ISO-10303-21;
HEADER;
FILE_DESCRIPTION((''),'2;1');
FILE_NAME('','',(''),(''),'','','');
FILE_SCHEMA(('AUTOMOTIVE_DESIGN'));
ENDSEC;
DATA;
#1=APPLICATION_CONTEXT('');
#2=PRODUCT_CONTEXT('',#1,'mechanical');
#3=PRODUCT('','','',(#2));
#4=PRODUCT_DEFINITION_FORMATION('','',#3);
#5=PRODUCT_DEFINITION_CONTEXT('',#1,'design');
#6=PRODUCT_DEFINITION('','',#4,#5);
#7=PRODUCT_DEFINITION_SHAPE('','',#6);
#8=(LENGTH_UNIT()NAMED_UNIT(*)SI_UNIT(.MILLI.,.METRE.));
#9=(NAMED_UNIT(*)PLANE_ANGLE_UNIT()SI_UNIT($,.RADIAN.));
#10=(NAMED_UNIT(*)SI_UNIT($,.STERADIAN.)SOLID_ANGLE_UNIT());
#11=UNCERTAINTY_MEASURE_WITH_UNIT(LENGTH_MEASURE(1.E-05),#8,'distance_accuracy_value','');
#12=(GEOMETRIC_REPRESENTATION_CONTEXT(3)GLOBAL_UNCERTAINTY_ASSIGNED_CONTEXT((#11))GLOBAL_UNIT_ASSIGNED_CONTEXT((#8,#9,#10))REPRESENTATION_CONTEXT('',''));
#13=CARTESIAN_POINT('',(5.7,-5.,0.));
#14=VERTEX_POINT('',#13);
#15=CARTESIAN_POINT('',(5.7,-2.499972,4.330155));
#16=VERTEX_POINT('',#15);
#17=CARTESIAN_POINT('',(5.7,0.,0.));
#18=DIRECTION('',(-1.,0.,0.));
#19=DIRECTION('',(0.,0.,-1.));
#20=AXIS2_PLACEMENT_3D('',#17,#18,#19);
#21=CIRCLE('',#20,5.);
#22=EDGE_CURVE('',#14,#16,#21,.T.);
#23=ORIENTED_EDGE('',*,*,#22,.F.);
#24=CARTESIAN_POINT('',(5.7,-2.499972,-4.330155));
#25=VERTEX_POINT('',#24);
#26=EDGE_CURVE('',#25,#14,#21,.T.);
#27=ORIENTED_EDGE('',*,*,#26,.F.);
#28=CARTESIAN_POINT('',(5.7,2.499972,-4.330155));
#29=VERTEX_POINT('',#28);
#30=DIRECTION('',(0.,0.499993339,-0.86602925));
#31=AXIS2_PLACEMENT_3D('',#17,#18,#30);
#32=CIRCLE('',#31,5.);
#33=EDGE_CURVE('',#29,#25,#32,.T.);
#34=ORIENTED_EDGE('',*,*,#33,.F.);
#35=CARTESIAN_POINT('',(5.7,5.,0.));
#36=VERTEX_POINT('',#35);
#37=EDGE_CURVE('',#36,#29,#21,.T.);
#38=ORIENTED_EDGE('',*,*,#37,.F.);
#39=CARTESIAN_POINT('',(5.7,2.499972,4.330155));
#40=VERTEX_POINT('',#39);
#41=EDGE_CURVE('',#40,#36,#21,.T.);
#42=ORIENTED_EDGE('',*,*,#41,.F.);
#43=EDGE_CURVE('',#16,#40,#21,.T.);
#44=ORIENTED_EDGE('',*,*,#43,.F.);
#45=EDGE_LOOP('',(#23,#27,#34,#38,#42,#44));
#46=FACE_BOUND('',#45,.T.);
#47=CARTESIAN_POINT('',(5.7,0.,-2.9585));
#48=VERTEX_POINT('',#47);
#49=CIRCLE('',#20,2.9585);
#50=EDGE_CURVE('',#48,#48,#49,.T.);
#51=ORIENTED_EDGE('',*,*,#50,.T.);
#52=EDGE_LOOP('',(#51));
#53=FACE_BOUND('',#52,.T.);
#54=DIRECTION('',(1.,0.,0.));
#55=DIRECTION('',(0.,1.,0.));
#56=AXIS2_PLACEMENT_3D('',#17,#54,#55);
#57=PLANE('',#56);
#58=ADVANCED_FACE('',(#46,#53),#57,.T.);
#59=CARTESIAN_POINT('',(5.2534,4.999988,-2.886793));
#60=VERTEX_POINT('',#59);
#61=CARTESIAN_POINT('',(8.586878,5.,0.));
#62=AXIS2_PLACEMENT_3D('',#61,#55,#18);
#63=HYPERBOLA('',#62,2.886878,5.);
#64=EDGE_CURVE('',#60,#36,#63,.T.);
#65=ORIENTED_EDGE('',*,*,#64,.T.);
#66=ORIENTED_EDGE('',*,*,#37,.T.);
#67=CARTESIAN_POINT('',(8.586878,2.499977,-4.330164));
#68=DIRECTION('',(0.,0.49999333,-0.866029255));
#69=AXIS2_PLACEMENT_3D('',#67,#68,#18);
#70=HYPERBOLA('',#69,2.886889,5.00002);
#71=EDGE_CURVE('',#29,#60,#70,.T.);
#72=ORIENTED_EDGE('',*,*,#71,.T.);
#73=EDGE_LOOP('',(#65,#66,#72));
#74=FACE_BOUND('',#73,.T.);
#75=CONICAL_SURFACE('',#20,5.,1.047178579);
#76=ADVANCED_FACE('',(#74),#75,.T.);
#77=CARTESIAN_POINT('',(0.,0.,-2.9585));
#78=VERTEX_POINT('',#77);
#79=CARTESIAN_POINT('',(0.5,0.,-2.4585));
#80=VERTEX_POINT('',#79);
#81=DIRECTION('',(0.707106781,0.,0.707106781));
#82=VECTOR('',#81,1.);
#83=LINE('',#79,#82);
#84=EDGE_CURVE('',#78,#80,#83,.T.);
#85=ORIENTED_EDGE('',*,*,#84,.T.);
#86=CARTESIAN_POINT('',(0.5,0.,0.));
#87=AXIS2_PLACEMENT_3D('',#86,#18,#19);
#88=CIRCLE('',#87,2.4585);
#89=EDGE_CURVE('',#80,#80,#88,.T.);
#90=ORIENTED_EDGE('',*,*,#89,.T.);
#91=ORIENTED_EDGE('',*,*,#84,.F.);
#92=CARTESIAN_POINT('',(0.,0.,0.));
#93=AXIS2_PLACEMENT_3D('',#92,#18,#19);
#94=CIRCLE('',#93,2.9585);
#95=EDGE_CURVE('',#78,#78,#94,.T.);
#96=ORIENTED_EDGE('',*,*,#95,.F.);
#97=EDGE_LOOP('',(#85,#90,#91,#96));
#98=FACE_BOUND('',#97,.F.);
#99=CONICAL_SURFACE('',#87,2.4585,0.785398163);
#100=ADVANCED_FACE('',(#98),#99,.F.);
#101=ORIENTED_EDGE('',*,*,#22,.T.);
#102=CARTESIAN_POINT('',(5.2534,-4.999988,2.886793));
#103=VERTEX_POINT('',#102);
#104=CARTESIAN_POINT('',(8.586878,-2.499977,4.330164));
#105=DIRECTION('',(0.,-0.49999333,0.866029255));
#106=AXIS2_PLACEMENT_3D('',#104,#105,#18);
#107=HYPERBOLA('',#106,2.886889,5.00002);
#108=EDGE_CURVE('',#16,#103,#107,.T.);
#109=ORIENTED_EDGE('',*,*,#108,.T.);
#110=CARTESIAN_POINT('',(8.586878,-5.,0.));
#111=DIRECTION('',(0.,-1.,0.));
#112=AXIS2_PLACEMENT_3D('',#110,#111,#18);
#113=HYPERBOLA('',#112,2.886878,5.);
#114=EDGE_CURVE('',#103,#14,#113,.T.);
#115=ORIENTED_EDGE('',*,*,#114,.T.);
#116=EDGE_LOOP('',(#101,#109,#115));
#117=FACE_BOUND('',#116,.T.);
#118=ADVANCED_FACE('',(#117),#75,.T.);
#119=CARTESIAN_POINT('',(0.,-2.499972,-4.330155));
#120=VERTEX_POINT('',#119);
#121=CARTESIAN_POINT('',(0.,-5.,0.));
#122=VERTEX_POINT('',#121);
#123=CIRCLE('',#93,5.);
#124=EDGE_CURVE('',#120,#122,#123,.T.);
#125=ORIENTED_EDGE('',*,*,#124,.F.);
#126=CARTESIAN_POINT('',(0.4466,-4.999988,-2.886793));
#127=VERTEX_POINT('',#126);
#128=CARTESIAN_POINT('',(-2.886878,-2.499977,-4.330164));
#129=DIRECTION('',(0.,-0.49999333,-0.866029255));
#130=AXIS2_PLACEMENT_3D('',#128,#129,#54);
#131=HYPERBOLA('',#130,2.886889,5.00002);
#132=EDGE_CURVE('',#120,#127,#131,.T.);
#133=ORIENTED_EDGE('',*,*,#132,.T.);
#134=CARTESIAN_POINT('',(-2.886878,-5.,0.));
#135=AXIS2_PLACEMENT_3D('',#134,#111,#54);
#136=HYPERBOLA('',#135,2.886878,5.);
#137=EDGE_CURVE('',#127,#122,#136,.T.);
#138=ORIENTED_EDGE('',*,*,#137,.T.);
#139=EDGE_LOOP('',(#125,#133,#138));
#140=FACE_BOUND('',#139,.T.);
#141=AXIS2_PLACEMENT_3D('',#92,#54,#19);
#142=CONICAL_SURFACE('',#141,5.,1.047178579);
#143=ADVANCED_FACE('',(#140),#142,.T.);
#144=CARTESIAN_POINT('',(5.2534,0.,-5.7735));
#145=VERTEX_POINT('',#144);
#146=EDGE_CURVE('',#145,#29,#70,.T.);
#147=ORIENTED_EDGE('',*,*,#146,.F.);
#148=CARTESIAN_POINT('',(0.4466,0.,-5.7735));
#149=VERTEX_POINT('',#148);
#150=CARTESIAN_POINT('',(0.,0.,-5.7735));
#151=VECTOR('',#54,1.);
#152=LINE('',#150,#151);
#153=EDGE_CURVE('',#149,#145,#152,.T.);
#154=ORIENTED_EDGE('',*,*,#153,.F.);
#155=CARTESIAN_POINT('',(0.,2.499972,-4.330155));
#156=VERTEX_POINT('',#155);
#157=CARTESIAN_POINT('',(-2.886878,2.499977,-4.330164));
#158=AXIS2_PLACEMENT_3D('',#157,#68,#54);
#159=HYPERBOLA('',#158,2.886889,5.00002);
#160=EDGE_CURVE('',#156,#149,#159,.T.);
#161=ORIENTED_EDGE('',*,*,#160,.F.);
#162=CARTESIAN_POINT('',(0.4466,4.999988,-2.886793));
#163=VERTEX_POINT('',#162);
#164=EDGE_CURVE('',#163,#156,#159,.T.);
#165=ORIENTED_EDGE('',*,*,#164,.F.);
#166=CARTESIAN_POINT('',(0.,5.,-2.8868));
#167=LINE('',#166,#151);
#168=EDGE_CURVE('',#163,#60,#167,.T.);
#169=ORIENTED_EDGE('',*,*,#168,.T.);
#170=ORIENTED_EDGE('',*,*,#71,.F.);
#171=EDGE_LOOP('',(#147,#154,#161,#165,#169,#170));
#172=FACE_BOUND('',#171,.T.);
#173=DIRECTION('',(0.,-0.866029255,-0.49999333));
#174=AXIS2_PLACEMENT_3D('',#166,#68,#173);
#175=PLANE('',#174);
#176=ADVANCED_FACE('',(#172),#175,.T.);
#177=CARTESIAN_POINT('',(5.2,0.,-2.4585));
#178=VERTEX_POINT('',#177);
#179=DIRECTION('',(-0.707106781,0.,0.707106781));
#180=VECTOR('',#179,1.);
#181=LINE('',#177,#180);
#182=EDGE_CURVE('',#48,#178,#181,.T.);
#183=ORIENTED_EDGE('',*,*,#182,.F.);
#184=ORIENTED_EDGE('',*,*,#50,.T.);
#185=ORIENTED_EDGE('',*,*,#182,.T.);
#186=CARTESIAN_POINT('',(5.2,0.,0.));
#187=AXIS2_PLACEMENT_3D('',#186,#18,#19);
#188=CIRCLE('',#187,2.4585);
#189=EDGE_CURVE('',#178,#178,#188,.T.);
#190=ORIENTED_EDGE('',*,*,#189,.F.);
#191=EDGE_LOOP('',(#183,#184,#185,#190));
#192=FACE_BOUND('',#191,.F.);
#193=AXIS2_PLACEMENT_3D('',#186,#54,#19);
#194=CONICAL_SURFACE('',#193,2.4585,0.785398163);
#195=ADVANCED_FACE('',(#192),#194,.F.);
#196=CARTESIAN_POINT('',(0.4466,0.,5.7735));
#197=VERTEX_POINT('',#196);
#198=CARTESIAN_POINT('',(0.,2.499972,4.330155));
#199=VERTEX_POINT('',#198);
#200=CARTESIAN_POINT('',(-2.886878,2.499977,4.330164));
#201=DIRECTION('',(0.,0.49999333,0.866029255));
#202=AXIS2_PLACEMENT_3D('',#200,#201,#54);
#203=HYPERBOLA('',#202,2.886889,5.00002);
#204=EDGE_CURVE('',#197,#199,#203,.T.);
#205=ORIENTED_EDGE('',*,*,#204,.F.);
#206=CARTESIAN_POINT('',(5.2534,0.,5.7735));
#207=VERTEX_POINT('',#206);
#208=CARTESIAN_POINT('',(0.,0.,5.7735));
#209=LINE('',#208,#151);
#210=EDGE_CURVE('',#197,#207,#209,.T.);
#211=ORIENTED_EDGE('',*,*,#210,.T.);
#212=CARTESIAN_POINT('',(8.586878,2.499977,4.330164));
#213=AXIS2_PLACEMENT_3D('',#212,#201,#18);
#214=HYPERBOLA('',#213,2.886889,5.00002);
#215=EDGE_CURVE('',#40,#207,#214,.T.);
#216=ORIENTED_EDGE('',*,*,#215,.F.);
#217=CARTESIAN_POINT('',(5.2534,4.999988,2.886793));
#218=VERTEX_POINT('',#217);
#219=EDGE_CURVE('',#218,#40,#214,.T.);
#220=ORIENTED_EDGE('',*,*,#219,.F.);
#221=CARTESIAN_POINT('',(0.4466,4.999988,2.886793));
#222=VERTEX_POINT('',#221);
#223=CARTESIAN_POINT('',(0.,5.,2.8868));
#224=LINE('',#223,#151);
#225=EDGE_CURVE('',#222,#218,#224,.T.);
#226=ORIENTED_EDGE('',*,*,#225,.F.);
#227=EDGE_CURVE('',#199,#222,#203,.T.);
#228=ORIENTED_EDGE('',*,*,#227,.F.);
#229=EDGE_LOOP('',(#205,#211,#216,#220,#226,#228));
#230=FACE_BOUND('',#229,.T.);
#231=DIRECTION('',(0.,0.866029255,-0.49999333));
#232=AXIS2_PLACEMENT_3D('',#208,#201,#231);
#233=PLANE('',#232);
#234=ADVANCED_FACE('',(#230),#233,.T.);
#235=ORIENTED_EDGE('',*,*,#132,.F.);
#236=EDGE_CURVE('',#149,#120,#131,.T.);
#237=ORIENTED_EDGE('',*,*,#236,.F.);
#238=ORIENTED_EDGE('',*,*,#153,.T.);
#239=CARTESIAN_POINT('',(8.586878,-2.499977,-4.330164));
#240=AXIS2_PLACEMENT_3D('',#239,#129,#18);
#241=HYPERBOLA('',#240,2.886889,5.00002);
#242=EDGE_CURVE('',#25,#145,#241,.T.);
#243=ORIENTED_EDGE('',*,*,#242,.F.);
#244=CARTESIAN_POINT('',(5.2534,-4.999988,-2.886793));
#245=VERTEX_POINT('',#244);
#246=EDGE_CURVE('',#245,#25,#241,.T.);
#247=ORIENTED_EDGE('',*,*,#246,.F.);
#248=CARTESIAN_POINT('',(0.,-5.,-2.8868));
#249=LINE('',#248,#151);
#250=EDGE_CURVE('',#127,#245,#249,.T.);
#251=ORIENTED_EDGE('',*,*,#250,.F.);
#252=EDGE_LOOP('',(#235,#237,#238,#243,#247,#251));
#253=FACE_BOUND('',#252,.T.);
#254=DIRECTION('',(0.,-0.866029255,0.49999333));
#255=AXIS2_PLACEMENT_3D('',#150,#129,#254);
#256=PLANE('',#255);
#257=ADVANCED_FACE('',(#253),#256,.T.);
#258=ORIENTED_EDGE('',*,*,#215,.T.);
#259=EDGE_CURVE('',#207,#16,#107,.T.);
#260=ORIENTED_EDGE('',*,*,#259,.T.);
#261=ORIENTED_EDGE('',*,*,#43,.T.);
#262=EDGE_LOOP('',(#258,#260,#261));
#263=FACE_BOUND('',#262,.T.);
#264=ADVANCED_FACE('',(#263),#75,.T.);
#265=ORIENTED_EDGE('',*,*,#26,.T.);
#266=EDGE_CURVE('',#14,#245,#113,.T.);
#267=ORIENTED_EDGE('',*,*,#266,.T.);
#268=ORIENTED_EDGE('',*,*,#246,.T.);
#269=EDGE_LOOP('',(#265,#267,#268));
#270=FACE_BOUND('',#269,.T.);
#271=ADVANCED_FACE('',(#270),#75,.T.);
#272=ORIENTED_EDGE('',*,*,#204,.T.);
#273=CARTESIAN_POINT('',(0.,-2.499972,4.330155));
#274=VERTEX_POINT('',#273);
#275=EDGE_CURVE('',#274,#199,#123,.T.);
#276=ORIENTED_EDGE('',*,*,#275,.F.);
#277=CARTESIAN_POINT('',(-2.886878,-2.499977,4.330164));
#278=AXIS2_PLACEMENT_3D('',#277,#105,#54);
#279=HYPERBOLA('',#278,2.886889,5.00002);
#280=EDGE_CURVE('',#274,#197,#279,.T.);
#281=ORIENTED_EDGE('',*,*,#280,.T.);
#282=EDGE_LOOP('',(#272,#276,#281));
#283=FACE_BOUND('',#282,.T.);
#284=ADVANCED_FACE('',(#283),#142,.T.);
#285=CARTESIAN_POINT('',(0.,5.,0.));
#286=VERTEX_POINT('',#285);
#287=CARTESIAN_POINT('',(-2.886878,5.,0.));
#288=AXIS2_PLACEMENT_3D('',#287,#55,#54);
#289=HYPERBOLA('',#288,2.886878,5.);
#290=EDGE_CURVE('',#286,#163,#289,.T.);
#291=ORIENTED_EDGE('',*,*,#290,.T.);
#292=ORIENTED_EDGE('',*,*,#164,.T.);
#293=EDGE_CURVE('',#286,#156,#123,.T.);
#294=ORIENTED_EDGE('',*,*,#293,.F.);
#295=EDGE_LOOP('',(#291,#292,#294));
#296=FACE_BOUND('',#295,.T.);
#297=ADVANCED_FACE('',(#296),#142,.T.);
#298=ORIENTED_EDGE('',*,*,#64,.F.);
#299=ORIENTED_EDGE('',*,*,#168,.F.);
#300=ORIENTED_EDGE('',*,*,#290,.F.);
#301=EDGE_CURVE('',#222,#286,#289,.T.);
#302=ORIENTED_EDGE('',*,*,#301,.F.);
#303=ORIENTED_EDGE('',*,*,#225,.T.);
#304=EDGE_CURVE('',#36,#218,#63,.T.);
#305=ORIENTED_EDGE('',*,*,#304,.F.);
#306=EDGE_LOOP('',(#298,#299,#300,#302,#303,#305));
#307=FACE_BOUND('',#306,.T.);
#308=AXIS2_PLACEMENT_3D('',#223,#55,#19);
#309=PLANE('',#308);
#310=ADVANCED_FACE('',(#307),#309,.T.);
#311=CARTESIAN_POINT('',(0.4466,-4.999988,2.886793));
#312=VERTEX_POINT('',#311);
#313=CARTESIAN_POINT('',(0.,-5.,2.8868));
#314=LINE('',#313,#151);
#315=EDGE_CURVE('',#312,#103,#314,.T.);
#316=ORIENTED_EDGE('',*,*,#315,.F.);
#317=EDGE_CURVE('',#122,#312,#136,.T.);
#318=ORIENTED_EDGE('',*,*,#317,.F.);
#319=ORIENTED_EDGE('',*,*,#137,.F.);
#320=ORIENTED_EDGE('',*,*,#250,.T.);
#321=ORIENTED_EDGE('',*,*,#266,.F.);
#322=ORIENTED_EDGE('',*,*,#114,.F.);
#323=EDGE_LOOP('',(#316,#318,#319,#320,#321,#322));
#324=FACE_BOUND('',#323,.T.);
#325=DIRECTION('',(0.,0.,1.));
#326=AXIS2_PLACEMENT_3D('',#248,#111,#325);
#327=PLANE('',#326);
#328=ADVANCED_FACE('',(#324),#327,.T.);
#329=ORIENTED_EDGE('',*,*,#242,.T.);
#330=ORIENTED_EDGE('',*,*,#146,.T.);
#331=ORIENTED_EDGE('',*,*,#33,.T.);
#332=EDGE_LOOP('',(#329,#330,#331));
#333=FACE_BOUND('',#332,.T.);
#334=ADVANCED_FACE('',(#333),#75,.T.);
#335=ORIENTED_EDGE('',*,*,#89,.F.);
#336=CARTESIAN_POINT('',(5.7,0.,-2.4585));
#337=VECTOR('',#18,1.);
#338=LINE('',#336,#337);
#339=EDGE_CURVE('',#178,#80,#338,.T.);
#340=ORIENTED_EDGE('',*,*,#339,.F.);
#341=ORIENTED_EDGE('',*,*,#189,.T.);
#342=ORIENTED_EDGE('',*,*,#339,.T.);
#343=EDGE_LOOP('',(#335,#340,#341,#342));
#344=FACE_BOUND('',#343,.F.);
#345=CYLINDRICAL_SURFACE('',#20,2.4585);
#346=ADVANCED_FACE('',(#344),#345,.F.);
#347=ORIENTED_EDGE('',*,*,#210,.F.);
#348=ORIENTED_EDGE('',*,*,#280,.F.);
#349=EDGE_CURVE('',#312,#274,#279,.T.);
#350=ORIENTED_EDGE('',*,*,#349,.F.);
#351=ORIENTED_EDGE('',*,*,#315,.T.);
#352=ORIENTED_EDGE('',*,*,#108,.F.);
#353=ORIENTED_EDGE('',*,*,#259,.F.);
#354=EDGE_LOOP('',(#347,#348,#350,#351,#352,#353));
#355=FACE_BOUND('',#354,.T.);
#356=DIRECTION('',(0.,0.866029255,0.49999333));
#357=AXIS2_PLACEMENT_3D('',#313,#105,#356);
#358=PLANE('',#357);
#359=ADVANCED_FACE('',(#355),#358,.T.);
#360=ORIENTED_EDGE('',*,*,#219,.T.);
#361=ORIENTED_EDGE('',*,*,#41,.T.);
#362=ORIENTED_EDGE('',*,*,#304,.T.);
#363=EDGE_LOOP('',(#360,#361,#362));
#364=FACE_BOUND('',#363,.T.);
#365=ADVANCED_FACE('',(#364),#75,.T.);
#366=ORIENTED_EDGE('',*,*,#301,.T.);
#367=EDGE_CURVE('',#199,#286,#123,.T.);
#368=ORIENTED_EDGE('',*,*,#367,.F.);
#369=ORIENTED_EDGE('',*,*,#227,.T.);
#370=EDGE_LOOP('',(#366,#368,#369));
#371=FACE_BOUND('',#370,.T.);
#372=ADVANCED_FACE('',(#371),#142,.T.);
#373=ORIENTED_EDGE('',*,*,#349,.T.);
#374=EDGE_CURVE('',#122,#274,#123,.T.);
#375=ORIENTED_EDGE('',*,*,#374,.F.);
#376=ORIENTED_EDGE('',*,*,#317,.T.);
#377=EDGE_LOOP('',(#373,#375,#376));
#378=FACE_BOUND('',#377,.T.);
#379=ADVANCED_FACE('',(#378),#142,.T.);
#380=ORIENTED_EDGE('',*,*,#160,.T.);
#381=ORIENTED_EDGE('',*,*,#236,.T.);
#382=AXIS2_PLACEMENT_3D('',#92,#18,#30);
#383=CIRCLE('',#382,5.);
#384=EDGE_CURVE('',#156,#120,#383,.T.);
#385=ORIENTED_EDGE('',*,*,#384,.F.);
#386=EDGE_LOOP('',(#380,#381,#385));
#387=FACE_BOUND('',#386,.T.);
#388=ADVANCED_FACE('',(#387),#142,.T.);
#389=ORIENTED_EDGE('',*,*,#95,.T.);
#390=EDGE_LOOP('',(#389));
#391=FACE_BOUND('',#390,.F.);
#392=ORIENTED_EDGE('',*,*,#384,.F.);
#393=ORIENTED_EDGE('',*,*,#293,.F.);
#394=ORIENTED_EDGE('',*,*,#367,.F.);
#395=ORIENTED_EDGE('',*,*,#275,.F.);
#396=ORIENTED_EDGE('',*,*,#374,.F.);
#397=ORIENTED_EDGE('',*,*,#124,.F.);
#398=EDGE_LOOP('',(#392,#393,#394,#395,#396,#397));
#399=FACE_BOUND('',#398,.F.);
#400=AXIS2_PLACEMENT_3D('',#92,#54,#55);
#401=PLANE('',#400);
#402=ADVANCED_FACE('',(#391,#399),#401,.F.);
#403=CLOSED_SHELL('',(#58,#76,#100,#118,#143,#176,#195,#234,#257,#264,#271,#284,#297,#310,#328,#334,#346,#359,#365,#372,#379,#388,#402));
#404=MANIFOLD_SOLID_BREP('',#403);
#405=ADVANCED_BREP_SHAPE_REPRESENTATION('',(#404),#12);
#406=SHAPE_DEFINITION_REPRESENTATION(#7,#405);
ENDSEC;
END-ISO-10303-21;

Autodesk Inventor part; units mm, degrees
sketch "Sketch1" plane through (0, 0, 0) normal (1, 0, 0) x (0, 1, 0)
  line L0 (5, 2.8868) -> (5, -2.8868)
  line L1 (5, -2.8868) -> (0, -5.7735)
  line L2 (0, -5.7735) -> (-5, -2.8868)
  line L3 (-5, -2.8868) -> (-5, 2.8868)
  line L4 (-5, 2.8868) -> (0, 5.7735)
  line L5 (0, 5.7735) -> (5, 2.8868)
  circle A0 centre (0, 0) radius 5 construction
  dimension "d0" = 10
extrude "Extrusion1" add sketch "Sketch1" along normal blind 5.7
sketch "Sketch2" plane through (5.7, 0, 0) normal (1, 0, 0) x (0, 1, 0)
  line L0 (-5, 2.8868) -> (0, 5.7735) projected
  line L1 (0, -5.7735) -> (-5, -2.8868) projected
  line L2 (-5, 2.8868) -> (5, -2.8868) construction
  line L3 (-5, -2.8868) -> (5, 2.8868) construction
  point P0 (0, 0)
hole "Hole1" at (5.7, 0, 0) direction (-1, 0, 0) diameter 4.917 end through all thread size "M6x1" class "6H" standard "ISO Metric profile"
chamfer "Chamfer1" distance 0.5 angle 45 2 edges at (5.7, 0, 2.4585) (0, 0, 2.4585)
sketch "Sketch3" plane through (0, 0, 0) normal (0, 1, 0) x (-1, 0, 0)
  line L0 (-7.0172, 0) -> (2.1698, 0) projected
  line L1 (-5.7048, 0) -> (0.8574, 0)
  line L2 (-5.7, 0) -> (-5.7, -5.7735)
  line L3 (-5.7, -5.7735) -> (0, -5.7735)
  line L4 (0, -5.7735) -> (0, 0)
  line L5 (-5.7, -2.8868) -> (-5.7, -5.7735) projected
  line L6 (0, -2.8868) -> (0, -5.7735) projected
  line L7 (0, -5.7735) -> (-5.7, -5.7735) projected
  line L8 (-5.7, -5) -> (-5.2534, -5.7735)
  line L9 (-5.7, -5.7735) -> (-5.7, -5)
  line L10 (-5.7, -5.7735) -> (-5.2534, -5.7735)
  line L11 (0, -5) -> (-0.4466, -5.7735)
  line L12 (-0.4466, -5.7735) -> (0, -5.7735)
  line L13 (0, -5.7735) -> (0, -5)
  dimension "d32" = 5
  dimension "d33" = 30
revolve "Revolution1" cut sketch "Sketch3" angle 360 about axis through (0, 0, 0) along (-1, 0, 0) contours L8 L3 L2 | L4 L3 L11
ref_plane "MSC_PT1" through (5.7, 0, 0) normal (1, 0, 0) x (0, 1, 0)
ref_plane "MSC_PT2" through (0, 0, 0) normal (-1, 0, 0) x (0, -1, 0)
ref_plane "MSC_PF1" through (0, 0, 0) normal (1, 0, 0) x (0, 1, 0)
equation "\"d0\" = Smax"
equation "\"d1\" = Mmax"
equation "\"d10\" = 0.5 * PTC"
equation "\"d32\" = 0.5 * Smax"
equation "\"NND\" = 6"
equation "\"Smax\" = 10"
equation "\"Mmax\" = 5.7"
equation "\"PTC\" = 1"
equation "\"THREADDIA\" = NND"
equation "\"TEMPLATE\" = 1.2345"
properties part number "ANSI B18.2.4.2M - M6x1" material "Steel, Mild"
